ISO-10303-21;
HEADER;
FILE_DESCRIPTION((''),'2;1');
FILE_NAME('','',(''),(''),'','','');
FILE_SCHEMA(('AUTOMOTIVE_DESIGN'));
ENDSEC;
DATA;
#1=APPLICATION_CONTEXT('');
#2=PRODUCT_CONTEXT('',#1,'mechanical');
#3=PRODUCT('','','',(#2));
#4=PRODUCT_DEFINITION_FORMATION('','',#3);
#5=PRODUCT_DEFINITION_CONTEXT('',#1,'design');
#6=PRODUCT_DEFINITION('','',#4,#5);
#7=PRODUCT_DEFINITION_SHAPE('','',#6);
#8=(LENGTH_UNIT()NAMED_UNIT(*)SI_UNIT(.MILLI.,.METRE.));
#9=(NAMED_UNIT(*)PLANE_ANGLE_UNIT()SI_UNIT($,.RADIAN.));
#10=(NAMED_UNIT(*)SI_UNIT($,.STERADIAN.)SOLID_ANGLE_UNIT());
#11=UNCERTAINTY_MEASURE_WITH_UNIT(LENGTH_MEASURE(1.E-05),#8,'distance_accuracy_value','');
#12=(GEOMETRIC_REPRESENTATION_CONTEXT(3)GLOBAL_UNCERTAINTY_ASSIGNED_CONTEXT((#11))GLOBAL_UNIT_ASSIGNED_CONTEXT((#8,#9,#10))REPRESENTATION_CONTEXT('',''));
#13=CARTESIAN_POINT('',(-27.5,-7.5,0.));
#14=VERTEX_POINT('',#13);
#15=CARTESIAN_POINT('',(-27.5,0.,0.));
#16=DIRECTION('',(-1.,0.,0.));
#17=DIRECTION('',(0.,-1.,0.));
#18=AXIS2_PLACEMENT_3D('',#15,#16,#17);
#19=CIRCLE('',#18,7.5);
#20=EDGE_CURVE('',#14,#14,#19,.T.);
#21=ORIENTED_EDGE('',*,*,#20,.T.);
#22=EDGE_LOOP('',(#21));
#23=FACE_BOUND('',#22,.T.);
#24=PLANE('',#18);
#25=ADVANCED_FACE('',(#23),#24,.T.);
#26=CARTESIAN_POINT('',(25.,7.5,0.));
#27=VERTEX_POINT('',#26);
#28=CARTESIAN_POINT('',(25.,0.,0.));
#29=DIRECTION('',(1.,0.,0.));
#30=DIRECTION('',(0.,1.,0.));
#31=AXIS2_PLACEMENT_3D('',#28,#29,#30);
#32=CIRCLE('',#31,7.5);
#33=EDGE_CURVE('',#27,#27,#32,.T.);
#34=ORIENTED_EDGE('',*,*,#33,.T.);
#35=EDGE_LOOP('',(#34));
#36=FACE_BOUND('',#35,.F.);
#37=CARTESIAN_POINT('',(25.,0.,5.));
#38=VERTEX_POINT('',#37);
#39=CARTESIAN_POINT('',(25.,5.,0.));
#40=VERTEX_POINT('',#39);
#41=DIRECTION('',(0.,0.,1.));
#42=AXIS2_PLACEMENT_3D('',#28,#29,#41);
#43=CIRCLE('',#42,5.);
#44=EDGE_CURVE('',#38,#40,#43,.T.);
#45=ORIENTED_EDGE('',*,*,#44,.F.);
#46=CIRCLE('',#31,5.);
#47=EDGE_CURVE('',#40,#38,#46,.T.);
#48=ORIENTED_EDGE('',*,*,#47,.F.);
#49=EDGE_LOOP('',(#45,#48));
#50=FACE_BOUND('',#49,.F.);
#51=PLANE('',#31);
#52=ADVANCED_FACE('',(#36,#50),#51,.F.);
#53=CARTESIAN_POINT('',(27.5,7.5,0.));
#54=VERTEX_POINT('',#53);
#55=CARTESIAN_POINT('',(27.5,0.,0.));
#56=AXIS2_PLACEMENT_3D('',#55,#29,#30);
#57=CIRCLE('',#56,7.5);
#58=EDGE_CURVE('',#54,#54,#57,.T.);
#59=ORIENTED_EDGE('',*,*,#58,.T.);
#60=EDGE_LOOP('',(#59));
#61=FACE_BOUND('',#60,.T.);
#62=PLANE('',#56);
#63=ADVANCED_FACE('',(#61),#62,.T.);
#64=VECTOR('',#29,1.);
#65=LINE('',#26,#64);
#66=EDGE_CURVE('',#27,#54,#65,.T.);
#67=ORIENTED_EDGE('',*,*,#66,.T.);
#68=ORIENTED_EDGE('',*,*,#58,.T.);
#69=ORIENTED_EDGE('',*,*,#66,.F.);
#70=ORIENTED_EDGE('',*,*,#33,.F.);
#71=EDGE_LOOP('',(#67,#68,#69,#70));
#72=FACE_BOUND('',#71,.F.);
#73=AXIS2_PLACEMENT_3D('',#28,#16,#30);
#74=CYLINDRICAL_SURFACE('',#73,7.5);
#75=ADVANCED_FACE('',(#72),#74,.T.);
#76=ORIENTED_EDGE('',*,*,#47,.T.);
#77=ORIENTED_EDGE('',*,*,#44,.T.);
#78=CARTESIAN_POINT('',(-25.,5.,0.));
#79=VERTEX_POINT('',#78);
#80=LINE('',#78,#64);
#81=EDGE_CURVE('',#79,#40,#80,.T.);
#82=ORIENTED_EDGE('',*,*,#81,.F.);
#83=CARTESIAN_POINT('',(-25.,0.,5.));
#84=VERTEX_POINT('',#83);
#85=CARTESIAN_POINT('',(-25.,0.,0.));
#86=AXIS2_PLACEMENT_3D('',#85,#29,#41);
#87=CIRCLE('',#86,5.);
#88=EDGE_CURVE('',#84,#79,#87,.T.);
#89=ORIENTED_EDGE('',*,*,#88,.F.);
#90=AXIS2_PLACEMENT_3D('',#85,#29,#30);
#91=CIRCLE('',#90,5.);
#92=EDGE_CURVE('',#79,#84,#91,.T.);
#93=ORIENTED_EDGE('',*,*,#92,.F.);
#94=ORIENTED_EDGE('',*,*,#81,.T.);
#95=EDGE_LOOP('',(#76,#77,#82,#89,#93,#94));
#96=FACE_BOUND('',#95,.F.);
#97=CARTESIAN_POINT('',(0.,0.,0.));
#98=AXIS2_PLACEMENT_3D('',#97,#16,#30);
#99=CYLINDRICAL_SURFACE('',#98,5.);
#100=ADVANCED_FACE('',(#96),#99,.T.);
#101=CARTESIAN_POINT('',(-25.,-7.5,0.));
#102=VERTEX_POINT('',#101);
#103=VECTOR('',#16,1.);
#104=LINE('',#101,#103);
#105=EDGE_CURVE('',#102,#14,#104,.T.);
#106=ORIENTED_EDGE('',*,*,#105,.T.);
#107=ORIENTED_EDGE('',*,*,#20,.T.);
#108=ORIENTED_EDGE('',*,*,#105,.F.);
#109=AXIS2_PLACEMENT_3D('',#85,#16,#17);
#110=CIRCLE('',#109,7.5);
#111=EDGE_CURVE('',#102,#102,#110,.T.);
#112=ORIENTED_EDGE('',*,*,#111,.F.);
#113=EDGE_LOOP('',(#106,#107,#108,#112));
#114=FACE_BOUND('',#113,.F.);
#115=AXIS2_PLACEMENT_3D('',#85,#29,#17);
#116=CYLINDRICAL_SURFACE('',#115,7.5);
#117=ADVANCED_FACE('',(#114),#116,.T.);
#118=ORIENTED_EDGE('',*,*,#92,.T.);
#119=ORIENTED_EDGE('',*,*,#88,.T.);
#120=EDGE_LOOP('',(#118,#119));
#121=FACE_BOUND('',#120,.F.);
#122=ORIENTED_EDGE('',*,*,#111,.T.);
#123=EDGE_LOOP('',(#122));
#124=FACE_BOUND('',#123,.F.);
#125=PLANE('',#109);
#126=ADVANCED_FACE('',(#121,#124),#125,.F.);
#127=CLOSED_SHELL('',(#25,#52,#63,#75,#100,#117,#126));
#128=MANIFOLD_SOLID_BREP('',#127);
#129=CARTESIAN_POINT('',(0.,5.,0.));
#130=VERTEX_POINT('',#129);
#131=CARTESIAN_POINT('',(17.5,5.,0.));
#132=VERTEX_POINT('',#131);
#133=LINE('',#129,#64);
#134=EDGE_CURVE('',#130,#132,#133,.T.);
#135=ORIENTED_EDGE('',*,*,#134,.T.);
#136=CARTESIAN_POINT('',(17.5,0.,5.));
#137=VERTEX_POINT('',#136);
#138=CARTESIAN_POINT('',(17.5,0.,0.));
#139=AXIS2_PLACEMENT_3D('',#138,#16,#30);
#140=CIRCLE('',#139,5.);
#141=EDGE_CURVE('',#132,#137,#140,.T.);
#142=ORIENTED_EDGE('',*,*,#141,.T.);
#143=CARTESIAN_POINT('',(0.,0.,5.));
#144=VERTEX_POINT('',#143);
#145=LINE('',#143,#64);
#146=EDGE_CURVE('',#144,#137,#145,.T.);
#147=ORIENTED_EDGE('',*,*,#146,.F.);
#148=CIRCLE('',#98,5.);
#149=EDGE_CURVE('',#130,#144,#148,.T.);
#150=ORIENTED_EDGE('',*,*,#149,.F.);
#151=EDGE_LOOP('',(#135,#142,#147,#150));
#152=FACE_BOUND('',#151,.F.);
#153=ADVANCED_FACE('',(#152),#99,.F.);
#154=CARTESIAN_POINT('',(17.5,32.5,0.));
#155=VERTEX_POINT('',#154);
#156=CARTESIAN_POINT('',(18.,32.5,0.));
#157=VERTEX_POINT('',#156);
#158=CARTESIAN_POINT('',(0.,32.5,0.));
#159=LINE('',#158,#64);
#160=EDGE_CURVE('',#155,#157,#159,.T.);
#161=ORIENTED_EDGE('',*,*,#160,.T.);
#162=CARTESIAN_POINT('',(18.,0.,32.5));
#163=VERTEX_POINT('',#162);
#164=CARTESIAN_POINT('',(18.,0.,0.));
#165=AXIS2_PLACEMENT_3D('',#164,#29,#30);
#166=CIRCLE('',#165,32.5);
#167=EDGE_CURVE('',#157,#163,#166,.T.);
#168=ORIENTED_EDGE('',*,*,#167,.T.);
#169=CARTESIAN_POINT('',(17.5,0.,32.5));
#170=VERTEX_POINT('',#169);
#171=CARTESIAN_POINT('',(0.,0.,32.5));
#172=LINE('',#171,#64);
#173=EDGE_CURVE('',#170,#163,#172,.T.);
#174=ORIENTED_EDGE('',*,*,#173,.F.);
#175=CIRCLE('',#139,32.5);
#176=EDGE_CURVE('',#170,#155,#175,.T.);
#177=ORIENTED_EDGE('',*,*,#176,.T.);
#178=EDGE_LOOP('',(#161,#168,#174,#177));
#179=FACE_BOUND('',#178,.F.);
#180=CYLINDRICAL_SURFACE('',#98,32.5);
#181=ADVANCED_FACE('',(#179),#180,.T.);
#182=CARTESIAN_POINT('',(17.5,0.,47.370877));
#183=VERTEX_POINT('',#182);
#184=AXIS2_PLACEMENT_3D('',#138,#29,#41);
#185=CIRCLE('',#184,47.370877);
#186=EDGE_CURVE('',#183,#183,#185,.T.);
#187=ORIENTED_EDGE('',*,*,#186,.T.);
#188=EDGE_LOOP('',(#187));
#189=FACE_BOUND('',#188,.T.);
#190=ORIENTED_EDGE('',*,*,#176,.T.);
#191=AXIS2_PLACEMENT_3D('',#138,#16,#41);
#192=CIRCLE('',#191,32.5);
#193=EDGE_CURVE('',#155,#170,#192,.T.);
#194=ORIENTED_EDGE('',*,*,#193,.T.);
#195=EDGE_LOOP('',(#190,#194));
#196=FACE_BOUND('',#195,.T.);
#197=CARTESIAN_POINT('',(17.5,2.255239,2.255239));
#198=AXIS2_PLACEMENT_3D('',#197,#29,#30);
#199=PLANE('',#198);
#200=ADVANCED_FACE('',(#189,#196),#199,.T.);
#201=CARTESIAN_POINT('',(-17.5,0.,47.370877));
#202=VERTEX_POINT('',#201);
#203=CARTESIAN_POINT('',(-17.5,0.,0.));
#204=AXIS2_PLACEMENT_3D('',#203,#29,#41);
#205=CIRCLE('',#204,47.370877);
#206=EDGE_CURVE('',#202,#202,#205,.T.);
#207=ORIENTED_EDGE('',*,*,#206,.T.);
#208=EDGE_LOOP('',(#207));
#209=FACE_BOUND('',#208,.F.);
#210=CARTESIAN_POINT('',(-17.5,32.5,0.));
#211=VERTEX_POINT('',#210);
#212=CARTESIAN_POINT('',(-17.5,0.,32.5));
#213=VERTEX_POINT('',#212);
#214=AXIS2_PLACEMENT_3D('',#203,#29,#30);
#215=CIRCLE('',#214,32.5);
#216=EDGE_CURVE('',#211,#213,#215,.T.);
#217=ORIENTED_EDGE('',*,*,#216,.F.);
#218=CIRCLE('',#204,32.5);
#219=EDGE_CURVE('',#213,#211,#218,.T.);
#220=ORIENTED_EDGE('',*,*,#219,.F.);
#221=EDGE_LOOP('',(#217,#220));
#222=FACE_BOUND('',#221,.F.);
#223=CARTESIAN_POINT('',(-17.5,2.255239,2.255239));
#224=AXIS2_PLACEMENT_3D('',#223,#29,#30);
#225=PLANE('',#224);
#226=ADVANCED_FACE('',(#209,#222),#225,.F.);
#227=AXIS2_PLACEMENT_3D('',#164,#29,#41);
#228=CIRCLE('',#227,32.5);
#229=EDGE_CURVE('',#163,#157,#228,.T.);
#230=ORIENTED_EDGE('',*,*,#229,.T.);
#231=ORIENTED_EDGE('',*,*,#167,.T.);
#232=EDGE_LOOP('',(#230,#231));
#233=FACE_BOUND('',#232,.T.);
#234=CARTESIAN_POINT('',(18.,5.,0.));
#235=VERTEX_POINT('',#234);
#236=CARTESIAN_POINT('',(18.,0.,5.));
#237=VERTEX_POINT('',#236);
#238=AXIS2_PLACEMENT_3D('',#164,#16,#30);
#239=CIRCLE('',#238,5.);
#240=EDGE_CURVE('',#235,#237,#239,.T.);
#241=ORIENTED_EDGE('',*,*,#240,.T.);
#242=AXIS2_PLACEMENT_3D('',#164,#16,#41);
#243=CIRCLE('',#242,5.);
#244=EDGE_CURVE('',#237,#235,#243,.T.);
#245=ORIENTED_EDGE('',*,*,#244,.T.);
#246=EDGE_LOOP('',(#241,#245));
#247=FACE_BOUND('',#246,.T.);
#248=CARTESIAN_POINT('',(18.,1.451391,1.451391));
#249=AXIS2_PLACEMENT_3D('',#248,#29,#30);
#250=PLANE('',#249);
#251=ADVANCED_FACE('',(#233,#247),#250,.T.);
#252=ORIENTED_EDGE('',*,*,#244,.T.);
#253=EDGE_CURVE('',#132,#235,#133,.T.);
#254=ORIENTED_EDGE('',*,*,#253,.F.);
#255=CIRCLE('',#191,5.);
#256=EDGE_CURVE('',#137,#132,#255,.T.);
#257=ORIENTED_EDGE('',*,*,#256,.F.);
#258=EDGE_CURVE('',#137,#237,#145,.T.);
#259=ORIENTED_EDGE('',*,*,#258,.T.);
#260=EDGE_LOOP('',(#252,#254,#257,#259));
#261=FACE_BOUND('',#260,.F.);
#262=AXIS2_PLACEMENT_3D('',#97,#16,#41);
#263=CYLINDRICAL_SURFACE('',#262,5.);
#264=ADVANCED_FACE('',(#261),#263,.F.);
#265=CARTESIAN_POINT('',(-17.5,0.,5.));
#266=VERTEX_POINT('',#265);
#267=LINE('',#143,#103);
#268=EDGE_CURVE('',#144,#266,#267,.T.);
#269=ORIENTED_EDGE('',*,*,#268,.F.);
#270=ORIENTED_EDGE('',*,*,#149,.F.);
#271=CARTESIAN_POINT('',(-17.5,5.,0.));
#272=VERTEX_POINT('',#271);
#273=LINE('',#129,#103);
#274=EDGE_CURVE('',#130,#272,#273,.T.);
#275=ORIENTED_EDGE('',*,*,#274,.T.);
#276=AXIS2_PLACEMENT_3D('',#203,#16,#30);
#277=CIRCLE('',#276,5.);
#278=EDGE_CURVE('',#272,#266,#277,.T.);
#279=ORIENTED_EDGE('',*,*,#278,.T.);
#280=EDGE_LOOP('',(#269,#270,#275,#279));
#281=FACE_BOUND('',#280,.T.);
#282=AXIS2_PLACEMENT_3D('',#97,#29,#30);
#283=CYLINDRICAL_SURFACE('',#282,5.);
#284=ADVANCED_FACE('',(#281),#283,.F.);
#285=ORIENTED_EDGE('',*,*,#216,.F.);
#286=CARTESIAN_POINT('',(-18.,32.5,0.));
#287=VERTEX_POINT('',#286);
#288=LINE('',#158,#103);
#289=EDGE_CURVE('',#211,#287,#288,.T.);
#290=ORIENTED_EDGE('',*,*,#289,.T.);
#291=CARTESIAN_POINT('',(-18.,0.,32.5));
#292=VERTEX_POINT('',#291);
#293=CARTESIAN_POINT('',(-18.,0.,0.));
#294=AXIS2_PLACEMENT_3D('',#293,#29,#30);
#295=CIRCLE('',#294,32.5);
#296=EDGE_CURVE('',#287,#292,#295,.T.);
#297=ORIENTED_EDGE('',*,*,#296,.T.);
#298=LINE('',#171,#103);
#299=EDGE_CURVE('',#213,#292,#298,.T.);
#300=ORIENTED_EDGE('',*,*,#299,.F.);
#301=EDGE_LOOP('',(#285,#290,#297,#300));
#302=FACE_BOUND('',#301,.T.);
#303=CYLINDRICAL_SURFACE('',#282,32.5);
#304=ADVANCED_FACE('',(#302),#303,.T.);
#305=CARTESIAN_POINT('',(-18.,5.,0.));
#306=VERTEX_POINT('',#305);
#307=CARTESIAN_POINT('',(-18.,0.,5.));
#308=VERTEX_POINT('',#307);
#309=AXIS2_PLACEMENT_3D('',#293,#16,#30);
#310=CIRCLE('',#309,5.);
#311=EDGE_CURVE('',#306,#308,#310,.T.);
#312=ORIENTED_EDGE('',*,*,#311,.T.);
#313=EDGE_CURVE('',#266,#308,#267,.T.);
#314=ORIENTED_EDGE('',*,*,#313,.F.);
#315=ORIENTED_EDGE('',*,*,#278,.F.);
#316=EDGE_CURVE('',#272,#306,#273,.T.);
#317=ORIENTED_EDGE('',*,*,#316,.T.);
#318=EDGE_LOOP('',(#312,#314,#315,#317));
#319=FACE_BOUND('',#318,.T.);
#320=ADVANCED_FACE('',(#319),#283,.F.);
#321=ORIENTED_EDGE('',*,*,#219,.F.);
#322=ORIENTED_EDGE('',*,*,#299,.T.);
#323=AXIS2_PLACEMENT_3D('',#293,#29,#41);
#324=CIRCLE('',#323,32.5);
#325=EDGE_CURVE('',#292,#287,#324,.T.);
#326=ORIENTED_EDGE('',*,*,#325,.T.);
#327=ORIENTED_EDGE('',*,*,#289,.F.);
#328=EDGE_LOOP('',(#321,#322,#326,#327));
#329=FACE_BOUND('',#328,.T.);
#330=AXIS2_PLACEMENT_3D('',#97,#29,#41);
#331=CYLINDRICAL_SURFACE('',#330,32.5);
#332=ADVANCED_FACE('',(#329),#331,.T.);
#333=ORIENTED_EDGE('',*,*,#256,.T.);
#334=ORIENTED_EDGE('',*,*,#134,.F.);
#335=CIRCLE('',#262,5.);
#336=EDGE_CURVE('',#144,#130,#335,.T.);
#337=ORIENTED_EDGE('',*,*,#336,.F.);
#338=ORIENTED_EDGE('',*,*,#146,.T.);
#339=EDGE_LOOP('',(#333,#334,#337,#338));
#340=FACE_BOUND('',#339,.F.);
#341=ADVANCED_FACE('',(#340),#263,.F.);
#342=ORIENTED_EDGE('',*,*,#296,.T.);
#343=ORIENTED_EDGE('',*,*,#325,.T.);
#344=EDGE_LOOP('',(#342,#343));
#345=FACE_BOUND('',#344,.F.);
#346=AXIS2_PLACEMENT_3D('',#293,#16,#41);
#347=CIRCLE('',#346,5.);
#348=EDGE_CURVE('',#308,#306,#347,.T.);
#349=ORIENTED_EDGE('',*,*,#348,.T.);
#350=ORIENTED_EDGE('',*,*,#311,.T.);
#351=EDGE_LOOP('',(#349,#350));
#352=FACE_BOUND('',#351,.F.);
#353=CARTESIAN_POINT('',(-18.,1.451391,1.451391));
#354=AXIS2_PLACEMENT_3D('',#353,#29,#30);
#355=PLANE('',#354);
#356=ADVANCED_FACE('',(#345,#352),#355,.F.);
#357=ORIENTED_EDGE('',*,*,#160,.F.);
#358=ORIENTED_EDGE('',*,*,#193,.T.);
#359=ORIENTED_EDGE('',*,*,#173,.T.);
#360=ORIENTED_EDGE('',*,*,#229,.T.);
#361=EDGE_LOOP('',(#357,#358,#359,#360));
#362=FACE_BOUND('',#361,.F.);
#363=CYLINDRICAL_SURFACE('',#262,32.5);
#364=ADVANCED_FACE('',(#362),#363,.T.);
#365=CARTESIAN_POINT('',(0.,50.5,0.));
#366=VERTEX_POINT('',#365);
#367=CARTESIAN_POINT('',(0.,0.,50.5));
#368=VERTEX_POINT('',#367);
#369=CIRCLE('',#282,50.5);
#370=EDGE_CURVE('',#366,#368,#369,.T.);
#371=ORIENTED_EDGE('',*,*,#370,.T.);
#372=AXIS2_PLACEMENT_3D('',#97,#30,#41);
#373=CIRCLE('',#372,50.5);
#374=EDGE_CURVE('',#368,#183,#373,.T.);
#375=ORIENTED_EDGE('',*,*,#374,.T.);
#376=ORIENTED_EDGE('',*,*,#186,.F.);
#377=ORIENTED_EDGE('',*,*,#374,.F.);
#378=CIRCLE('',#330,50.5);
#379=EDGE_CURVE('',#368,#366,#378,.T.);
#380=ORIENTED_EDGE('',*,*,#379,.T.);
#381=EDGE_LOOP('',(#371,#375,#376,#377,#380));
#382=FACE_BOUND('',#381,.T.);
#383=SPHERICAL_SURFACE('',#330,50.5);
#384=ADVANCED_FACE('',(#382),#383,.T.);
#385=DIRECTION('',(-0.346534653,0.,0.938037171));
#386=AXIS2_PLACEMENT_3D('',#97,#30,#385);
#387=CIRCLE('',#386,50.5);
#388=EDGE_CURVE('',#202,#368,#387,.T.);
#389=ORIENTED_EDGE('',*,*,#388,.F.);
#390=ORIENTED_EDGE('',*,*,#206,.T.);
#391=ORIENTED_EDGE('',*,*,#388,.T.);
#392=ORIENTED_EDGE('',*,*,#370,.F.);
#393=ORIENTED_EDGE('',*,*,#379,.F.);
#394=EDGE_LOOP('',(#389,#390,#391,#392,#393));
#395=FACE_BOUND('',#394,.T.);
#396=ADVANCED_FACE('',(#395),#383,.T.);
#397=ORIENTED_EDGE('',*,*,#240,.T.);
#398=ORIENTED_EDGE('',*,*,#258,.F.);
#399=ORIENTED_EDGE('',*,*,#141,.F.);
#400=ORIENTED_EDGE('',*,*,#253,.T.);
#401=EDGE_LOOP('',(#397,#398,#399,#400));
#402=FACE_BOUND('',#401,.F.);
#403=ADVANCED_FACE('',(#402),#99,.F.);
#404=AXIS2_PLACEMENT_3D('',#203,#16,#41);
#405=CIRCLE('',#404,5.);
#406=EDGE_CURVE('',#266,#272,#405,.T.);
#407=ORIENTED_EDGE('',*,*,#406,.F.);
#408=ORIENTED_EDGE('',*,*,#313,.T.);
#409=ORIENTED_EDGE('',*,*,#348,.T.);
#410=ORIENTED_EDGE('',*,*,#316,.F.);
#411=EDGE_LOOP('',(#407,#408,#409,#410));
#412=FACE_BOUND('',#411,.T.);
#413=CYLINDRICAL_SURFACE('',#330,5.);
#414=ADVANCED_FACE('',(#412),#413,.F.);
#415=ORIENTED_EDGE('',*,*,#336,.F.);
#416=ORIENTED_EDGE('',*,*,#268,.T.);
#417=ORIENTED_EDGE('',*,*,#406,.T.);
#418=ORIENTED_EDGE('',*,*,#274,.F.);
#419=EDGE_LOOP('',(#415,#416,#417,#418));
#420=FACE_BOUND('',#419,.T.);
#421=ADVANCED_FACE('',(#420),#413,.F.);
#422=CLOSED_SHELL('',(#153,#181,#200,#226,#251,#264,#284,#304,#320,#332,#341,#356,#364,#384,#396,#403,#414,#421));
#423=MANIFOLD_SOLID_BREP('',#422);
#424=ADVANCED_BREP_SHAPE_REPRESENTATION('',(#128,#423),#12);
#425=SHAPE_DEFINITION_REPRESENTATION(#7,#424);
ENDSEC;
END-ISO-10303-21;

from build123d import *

# Parameters (mm, degrees)
F1_DEPTH = 17.5
F2_DEPTH = 18
F5_DEPTH = 25
F6_R     = 7.5
F7_DEPTH = 2.5
F8_R     = 7.5
F9_DEPTH = 2.5


# Not quite as in the source:
# - a feature names something its author has since deleted; it is built from what else it names


with BuildPart() as f1:
    # F0 (on Right) → F1 (new body, symmetric)
    with BuildSketch(Plane.YZ):
        with BuildLine():
            ThreePointArc((0, 50.5), (-35.7088924499, -35.7088924499), (50.5, 0))
            ThreePointArc((50.5, 0), (35.7088924499, 35.7088924499), (0, 50.5))
        make_face()
        with BuildLine():
            ThreePointArc((35, 0), (-24.7487373415, -24.7487373415), (0, 35))
            ThreePointArc((0, 35), (24.7487373415, 24.7487373415), (35, 0))
        make_face(mode=Mode.SUBTRACT)
        with BuildLine():
            ThreePointArc((35, 0), (24.7487373415, 24.7487373415), (0, 35))
            ThreePointArc((0, 35), (-24.7487373415, -24.7487373415), (35, 0))
        make_face()
        with BuildLine():
            ThreePointArc((32.5, 0), (-22.9809703886, -22.9809703886), (0, 32.5))
            ThreePointArc((0, 32.5), (22.9809703886, 22.9809703886), (32.5, 0))
        make_face(mode=Mode.SUBTRACT)
        with BuildLine():
            ThreePointArc((32.5, 0), (22.9809703886, 22.9809703886), (0, 32.5))
            ThreePointArc((0, 32.5), (-22.9809703886, -22.9809703886), (32.5, 0))
        make_face()
        with BuildLine():
            ThreePointArc((5, 0), (-3.5355339059, -3.5355339059), (0, 5))
            ThreePointArc((0, 5), (3.5355339059, 3.5355339059), (5, 0))
        make_face(mode=Mode.SUBTRACT)
    extrude(amount=F1_DEPTH, both=True)

    # F0 (on Right) → F2 (join, symmetric)
    with BuildSketch(Plane.YZ):
        with BuildLine():
            ThreePointArc((32.5, 0), (22.9809703886, 22.9809703886), (0, 32.5))
            ThreePointArc((0, 32.5), (-22.9809703886, -22.9809703886), (32.5, 0))
        make_face()
        with BuildLine():
            ThreePointArc((5, 0), (-3.5355339059, -3.5355339059), (0, 5))
            ThreePointArc((0, 5), (3.5355339059, 3.5355339059), (5, 0))
        make_face(mode=Mode.SUBTRACT)
    extrude(amount=F2_DEPTH, both=True)

    # F3 (on Front) → F4 (revolve, cut)
    with BuildSketch(Plane.XZ):
        with BuildLine():
            ThreePointArc((-17.5, 47.3708771293), (-8.888776771, 49.7115645249), (0, 50.5))
            Line((0, 50.5), (-17.5, 50.5))
            Line((-17.5, 50.5), (-17.5, 47.3708771293))
        make_face()
        with BuildLine():
            Line((17.5, 50.5), (0, 50.5))
            ThreePointArc((0, 50.5), (8.888776771, 49.7115645249), (17.5, 47.3708771293))
            Line((17.5, 47.3708771293), (17.5, 50.5))
        make_face()
    revolve(axis=Axis((-0.1237622588, 0, 0), (1, 0, 0)), mode=Mode.SUBTRACT)


with BuildPart() as f5:
    # F0 (on Right) → F5 (new body, symmetric)
    with BuildSketch(Plane.YZ):
        with BuildLine():
            ThreePointArc((5, 0), (3.5355339059, 3.5355339059), (0, 5))
            ThreePointArc((0, 5), (-3.5355339059, -3.5355339059), (5, 0))
        make_face()
    extrude(amount=F5_DEPTH, both=True)

    # F6 (on face) → F7 (join)
    with BuildSketch(Plane.YZ.offset(25)):
        Circle(F6_R)
        with BuildLine():
            ThreePointArc((5, 0), (-3.5355339059, -3.5355339059), (0, 5))
            ThreePointArc((0, 5), (3.5355339059, 3.5355339059), (5, 0))
        make_face(mode=Mode.SUBTRACT)
        with BuildLine():
            ThreePointArc((5, 0), (3.5355339059, 3.5355339059), (0, 5))
            ThreePointArc((0, 5), (-3.5355339059, -3.5355339059), (5, 0))
        make_face()
    extrude(amount=F7_DEPTH)

    # F8 (on face) → F9 (join)
    with BuildSketch(Plane(origin=(-25, 0, 0), x_dir=(0, -1, 0), z_dir=(-1, 0, 0))):
        Circle(F8_R)
        with BuildLine():
            ThreePointArc((0, 5), (3.5355339059, -3.5355339059), (-5, 0))
            ThreePointArc((-5, 0), (-3.5355339059, 3.5355339059), (0, 5))
        make_face(mode=Mode.SUBTRACT)
        with BuildLine():
            ThreePointArc((0, 5), (-3.5355339059, 3.5355339059), (-5, 0))
            ThreePointArc((-5, 0), (3.5355339059, -3.5355339059), (0, 5))
        make_face()
    extrude(amount=F9_DEPTH)


solid = Compound([f1.part, f5.part])
